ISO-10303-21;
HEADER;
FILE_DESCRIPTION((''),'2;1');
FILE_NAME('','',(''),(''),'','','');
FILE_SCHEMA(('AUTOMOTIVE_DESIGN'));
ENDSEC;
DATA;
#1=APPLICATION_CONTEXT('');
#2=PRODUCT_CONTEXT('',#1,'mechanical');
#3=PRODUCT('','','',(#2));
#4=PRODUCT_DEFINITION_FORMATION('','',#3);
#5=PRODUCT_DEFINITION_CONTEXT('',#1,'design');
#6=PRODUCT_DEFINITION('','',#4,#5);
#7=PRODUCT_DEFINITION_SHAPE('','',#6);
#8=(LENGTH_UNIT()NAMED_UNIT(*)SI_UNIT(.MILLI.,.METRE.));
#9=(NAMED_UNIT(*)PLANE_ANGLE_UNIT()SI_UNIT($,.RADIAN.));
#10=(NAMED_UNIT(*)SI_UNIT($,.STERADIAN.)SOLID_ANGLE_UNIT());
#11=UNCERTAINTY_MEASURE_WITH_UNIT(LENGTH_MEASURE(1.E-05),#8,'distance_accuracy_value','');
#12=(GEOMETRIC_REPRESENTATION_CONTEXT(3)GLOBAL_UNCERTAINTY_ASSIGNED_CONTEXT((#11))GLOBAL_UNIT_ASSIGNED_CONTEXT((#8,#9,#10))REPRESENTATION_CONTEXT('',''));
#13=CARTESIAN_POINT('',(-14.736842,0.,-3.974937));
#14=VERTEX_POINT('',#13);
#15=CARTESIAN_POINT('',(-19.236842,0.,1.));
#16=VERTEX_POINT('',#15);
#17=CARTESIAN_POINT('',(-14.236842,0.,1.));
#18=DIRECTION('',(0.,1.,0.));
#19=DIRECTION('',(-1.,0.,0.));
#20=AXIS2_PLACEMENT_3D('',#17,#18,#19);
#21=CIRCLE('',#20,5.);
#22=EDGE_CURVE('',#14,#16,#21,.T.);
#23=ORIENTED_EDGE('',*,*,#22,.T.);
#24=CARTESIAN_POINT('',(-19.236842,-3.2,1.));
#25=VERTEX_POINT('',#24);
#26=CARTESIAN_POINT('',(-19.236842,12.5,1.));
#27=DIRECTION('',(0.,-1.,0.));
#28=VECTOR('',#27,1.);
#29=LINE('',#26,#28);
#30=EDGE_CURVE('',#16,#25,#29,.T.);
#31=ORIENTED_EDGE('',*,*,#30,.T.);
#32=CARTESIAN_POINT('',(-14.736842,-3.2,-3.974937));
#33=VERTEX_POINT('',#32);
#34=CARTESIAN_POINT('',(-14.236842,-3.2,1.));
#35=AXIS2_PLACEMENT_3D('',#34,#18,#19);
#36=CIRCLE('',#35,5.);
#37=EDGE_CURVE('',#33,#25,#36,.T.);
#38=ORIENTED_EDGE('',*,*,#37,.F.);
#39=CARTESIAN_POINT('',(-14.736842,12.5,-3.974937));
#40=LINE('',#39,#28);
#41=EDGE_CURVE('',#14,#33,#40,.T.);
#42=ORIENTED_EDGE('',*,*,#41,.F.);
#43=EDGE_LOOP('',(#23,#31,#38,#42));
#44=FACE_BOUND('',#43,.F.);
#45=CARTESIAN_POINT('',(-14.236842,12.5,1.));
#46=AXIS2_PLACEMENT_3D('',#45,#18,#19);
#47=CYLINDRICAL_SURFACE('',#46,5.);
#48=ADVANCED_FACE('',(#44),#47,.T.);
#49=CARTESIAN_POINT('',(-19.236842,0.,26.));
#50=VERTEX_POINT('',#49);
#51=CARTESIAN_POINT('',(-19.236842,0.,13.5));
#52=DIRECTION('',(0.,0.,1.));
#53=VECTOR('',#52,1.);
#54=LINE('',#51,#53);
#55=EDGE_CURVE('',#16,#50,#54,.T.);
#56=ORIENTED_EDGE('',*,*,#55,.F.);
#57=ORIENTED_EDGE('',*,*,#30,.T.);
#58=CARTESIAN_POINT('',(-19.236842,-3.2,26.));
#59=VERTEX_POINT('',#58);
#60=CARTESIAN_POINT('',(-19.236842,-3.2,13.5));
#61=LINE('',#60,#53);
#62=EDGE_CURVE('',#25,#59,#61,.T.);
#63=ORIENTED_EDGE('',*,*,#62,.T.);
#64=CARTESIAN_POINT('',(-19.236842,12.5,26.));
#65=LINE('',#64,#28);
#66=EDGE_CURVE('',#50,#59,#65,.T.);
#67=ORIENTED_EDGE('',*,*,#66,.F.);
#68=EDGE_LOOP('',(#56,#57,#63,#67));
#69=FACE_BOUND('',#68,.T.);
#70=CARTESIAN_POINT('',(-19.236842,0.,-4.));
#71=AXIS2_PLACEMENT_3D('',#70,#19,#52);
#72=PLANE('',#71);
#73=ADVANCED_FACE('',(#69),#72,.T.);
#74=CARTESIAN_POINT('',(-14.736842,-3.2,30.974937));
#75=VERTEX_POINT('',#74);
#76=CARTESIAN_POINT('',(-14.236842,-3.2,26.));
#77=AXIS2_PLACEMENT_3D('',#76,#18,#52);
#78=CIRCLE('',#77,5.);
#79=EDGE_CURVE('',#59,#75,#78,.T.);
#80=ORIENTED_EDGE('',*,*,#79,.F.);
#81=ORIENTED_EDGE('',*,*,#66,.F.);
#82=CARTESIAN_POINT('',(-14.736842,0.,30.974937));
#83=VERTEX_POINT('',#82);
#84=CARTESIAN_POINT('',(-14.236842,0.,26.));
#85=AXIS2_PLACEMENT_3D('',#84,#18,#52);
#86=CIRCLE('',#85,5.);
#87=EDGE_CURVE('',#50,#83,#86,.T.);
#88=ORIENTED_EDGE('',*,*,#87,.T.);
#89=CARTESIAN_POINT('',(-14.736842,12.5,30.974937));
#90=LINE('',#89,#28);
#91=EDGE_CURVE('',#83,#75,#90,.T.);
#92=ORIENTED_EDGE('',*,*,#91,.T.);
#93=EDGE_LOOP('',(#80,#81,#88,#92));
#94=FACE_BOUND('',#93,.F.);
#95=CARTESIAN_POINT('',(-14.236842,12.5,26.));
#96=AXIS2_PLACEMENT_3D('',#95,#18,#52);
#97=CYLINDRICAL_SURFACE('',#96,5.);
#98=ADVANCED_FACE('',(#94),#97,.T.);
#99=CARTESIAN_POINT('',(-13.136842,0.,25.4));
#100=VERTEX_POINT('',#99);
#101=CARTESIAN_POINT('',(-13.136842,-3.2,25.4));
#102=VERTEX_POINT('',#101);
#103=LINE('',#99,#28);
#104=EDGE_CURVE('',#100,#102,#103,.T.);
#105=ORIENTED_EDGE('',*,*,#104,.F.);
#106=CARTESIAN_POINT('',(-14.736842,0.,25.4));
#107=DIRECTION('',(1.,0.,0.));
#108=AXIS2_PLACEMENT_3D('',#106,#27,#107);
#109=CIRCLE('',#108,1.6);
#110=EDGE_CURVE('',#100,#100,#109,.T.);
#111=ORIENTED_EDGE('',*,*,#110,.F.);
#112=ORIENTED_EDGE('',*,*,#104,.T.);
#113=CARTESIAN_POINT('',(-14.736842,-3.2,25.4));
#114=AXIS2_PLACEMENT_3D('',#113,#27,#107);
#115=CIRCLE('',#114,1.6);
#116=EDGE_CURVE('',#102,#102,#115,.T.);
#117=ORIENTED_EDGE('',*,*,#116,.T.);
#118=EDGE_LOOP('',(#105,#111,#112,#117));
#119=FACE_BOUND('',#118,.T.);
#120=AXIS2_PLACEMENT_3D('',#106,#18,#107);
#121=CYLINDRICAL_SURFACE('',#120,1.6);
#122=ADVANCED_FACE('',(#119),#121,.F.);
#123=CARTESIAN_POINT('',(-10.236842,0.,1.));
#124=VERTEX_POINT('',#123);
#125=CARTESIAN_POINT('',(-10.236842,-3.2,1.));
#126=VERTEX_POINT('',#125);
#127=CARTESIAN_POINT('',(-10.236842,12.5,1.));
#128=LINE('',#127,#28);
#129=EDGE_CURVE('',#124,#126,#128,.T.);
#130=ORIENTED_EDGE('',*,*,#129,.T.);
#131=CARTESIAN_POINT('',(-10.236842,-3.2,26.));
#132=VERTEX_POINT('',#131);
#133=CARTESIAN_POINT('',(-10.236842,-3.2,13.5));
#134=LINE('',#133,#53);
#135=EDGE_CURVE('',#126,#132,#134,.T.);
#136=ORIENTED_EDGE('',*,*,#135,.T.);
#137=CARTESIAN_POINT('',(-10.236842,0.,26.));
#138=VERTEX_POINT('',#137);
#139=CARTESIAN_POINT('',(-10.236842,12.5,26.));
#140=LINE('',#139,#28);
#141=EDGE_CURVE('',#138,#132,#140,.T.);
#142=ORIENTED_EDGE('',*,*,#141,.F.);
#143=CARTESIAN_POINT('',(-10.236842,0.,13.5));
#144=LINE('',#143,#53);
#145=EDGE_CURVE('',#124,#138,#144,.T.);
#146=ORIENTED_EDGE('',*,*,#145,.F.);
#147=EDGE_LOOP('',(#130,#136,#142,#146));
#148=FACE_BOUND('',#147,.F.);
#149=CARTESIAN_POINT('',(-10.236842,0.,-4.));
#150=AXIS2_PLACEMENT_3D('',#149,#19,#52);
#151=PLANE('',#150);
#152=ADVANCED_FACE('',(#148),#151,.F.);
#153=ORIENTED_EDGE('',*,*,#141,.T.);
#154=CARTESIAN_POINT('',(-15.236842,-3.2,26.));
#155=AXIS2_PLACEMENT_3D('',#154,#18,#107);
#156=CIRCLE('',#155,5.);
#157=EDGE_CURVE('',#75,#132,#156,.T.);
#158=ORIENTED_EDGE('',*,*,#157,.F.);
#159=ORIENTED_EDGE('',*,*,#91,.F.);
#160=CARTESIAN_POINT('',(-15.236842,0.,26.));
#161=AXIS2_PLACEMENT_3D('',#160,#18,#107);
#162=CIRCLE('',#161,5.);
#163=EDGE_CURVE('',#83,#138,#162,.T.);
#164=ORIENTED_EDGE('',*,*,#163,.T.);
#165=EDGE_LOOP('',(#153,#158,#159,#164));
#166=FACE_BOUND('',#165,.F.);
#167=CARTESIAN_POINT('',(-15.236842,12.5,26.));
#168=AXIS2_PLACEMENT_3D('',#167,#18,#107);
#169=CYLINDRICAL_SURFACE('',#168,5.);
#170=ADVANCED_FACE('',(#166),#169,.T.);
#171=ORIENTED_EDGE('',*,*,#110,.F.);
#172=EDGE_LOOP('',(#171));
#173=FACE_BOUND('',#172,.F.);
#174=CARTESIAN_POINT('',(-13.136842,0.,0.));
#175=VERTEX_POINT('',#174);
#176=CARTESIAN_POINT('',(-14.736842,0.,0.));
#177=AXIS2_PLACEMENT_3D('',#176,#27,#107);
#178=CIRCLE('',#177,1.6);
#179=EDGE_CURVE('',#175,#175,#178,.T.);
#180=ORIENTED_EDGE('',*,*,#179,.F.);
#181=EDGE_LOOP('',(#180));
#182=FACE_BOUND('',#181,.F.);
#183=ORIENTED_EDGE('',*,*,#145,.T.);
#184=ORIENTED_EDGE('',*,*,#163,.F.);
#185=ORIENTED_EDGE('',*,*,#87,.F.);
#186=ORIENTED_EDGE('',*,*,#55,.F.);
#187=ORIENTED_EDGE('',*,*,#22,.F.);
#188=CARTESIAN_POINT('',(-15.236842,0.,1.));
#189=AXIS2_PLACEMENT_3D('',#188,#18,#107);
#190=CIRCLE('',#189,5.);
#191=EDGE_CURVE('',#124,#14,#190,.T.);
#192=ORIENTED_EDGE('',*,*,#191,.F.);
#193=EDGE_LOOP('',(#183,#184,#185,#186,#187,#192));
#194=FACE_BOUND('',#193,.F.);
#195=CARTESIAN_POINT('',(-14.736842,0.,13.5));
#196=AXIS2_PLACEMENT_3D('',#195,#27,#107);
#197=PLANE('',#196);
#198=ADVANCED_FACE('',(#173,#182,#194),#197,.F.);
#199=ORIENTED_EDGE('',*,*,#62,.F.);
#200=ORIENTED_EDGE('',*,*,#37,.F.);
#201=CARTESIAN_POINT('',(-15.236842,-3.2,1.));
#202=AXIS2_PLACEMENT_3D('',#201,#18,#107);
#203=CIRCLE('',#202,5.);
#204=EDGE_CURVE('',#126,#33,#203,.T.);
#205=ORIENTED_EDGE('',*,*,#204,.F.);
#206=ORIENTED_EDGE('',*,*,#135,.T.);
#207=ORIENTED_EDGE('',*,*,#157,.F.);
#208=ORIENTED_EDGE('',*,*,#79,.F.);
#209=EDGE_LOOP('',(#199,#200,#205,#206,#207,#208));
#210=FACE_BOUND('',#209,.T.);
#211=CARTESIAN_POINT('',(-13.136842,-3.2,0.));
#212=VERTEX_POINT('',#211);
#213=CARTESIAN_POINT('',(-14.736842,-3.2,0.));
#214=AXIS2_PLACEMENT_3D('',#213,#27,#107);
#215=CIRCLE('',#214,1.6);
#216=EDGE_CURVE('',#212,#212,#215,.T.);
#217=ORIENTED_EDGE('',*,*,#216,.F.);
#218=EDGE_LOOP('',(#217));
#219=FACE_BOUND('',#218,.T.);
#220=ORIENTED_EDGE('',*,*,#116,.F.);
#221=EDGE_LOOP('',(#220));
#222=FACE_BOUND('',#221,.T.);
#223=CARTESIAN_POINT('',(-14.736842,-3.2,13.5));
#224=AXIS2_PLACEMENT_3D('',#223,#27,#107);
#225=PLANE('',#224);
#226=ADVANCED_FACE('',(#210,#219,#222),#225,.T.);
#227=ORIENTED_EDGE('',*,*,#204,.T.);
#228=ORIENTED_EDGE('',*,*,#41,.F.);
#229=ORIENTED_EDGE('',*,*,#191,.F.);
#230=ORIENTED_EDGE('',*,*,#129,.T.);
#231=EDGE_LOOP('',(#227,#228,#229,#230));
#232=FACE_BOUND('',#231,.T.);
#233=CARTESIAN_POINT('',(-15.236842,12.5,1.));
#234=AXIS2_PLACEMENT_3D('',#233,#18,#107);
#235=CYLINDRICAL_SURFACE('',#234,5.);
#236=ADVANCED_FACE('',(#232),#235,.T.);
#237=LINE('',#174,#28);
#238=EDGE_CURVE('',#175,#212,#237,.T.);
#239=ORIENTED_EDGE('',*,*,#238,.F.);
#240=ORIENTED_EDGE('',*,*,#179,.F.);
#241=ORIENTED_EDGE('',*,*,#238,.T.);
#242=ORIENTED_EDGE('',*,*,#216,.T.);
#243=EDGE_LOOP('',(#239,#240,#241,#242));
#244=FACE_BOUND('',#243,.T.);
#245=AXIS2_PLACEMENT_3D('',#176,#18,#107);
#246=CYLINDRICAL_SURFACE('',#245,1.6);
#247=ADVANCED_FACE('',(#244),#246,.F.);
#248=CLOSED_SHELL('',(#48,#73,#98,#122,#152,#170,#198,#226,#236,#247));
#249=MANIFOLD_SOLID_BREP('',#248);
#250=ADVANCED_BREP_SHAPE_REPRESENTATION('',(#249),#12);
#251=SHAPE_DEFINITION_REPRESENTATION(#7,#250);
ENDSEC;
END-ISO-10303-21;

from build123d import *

# Parameters (mm, degrees)
F0_W        = 9
F0_H        = 35
F0_R        = 1.6
F1_DEPTH    = 3.2
F2_T1_DEPTH = 28.2


# Not quite as in the source:
# - a fillet or chamfer that OpenCascade refuses, or shapes differently, is made with other operations: its cross-section is extruded or revolved along the edge and cut away or added


with BuildPart() as f1:
    # F0 (on Front) → F1 (new body)
    with BuildSketch(Plane.XZ):
        with Locations((-14.7368423641, 13.5)):
            Rectangle(F0_W, F0_H)
        with Locations((-14.7368423641, 0)):
            Circle(F0_R, mode=Mode.SUBTRACT)
        with Locations((-14.7368423641, 25.4)):
            Circle(F0_R, mode=Mode.SUBTRACT)
    extrude(amount=F1_DEPTH)

    # F2: fillet of radius 5 on 4 edges, made by hand

    # F2_s2 → F2_t1 (cut)
    with BuildSketch(Plane.XZ.offset(-12.5)):
        with BuildLine():
            ThreePointArc((-10.2368423641, 26), (-11.7013084581, 29.5355339059), (-15.2368423641, 31))
            Line((-15.2368423641, 31), (-10.2368423641, 31))
            Line((-10.2368423641, 31), (-10.2368423641, 26))
        make_face()
        with BuildLine():
            ThreePointArc((-14.2368423641, 31), (-17.77237627, 29.5355339059), (-19.2368423641, 26))
            Line((-19.2368423641, 26), (-19.2368423641, 31))
            Line((-19.2368423641, 31), (-14.2368423641, 31))
        make_face()
        with BuildLine():
            ThreePointArc((-10.2368423641, 1), (-11.7013084581, -2.5355339059), (-15.2368423641, -4))
            Line((-15.2368423641, -4), (-10.2368423641, -4))
            Line((-10.2368423641, -4), (-10.2368423641, 1))
        make_face()
        with BuildLine():
            ThreePointArc((-19.2368423641, 1), (-17.77237627, -2.5355339059), (-14.2368423641, -4))
            Line((-14.2368423641, -4), (-19.2368423641, -4))
            Line((-19.2368423641, -4), (-19.2368423641, 1))
        make_face()
    extrude(amount=F2_T1_DEPTH, mode=Mode.SUBTRACT)


solid = f1.part
